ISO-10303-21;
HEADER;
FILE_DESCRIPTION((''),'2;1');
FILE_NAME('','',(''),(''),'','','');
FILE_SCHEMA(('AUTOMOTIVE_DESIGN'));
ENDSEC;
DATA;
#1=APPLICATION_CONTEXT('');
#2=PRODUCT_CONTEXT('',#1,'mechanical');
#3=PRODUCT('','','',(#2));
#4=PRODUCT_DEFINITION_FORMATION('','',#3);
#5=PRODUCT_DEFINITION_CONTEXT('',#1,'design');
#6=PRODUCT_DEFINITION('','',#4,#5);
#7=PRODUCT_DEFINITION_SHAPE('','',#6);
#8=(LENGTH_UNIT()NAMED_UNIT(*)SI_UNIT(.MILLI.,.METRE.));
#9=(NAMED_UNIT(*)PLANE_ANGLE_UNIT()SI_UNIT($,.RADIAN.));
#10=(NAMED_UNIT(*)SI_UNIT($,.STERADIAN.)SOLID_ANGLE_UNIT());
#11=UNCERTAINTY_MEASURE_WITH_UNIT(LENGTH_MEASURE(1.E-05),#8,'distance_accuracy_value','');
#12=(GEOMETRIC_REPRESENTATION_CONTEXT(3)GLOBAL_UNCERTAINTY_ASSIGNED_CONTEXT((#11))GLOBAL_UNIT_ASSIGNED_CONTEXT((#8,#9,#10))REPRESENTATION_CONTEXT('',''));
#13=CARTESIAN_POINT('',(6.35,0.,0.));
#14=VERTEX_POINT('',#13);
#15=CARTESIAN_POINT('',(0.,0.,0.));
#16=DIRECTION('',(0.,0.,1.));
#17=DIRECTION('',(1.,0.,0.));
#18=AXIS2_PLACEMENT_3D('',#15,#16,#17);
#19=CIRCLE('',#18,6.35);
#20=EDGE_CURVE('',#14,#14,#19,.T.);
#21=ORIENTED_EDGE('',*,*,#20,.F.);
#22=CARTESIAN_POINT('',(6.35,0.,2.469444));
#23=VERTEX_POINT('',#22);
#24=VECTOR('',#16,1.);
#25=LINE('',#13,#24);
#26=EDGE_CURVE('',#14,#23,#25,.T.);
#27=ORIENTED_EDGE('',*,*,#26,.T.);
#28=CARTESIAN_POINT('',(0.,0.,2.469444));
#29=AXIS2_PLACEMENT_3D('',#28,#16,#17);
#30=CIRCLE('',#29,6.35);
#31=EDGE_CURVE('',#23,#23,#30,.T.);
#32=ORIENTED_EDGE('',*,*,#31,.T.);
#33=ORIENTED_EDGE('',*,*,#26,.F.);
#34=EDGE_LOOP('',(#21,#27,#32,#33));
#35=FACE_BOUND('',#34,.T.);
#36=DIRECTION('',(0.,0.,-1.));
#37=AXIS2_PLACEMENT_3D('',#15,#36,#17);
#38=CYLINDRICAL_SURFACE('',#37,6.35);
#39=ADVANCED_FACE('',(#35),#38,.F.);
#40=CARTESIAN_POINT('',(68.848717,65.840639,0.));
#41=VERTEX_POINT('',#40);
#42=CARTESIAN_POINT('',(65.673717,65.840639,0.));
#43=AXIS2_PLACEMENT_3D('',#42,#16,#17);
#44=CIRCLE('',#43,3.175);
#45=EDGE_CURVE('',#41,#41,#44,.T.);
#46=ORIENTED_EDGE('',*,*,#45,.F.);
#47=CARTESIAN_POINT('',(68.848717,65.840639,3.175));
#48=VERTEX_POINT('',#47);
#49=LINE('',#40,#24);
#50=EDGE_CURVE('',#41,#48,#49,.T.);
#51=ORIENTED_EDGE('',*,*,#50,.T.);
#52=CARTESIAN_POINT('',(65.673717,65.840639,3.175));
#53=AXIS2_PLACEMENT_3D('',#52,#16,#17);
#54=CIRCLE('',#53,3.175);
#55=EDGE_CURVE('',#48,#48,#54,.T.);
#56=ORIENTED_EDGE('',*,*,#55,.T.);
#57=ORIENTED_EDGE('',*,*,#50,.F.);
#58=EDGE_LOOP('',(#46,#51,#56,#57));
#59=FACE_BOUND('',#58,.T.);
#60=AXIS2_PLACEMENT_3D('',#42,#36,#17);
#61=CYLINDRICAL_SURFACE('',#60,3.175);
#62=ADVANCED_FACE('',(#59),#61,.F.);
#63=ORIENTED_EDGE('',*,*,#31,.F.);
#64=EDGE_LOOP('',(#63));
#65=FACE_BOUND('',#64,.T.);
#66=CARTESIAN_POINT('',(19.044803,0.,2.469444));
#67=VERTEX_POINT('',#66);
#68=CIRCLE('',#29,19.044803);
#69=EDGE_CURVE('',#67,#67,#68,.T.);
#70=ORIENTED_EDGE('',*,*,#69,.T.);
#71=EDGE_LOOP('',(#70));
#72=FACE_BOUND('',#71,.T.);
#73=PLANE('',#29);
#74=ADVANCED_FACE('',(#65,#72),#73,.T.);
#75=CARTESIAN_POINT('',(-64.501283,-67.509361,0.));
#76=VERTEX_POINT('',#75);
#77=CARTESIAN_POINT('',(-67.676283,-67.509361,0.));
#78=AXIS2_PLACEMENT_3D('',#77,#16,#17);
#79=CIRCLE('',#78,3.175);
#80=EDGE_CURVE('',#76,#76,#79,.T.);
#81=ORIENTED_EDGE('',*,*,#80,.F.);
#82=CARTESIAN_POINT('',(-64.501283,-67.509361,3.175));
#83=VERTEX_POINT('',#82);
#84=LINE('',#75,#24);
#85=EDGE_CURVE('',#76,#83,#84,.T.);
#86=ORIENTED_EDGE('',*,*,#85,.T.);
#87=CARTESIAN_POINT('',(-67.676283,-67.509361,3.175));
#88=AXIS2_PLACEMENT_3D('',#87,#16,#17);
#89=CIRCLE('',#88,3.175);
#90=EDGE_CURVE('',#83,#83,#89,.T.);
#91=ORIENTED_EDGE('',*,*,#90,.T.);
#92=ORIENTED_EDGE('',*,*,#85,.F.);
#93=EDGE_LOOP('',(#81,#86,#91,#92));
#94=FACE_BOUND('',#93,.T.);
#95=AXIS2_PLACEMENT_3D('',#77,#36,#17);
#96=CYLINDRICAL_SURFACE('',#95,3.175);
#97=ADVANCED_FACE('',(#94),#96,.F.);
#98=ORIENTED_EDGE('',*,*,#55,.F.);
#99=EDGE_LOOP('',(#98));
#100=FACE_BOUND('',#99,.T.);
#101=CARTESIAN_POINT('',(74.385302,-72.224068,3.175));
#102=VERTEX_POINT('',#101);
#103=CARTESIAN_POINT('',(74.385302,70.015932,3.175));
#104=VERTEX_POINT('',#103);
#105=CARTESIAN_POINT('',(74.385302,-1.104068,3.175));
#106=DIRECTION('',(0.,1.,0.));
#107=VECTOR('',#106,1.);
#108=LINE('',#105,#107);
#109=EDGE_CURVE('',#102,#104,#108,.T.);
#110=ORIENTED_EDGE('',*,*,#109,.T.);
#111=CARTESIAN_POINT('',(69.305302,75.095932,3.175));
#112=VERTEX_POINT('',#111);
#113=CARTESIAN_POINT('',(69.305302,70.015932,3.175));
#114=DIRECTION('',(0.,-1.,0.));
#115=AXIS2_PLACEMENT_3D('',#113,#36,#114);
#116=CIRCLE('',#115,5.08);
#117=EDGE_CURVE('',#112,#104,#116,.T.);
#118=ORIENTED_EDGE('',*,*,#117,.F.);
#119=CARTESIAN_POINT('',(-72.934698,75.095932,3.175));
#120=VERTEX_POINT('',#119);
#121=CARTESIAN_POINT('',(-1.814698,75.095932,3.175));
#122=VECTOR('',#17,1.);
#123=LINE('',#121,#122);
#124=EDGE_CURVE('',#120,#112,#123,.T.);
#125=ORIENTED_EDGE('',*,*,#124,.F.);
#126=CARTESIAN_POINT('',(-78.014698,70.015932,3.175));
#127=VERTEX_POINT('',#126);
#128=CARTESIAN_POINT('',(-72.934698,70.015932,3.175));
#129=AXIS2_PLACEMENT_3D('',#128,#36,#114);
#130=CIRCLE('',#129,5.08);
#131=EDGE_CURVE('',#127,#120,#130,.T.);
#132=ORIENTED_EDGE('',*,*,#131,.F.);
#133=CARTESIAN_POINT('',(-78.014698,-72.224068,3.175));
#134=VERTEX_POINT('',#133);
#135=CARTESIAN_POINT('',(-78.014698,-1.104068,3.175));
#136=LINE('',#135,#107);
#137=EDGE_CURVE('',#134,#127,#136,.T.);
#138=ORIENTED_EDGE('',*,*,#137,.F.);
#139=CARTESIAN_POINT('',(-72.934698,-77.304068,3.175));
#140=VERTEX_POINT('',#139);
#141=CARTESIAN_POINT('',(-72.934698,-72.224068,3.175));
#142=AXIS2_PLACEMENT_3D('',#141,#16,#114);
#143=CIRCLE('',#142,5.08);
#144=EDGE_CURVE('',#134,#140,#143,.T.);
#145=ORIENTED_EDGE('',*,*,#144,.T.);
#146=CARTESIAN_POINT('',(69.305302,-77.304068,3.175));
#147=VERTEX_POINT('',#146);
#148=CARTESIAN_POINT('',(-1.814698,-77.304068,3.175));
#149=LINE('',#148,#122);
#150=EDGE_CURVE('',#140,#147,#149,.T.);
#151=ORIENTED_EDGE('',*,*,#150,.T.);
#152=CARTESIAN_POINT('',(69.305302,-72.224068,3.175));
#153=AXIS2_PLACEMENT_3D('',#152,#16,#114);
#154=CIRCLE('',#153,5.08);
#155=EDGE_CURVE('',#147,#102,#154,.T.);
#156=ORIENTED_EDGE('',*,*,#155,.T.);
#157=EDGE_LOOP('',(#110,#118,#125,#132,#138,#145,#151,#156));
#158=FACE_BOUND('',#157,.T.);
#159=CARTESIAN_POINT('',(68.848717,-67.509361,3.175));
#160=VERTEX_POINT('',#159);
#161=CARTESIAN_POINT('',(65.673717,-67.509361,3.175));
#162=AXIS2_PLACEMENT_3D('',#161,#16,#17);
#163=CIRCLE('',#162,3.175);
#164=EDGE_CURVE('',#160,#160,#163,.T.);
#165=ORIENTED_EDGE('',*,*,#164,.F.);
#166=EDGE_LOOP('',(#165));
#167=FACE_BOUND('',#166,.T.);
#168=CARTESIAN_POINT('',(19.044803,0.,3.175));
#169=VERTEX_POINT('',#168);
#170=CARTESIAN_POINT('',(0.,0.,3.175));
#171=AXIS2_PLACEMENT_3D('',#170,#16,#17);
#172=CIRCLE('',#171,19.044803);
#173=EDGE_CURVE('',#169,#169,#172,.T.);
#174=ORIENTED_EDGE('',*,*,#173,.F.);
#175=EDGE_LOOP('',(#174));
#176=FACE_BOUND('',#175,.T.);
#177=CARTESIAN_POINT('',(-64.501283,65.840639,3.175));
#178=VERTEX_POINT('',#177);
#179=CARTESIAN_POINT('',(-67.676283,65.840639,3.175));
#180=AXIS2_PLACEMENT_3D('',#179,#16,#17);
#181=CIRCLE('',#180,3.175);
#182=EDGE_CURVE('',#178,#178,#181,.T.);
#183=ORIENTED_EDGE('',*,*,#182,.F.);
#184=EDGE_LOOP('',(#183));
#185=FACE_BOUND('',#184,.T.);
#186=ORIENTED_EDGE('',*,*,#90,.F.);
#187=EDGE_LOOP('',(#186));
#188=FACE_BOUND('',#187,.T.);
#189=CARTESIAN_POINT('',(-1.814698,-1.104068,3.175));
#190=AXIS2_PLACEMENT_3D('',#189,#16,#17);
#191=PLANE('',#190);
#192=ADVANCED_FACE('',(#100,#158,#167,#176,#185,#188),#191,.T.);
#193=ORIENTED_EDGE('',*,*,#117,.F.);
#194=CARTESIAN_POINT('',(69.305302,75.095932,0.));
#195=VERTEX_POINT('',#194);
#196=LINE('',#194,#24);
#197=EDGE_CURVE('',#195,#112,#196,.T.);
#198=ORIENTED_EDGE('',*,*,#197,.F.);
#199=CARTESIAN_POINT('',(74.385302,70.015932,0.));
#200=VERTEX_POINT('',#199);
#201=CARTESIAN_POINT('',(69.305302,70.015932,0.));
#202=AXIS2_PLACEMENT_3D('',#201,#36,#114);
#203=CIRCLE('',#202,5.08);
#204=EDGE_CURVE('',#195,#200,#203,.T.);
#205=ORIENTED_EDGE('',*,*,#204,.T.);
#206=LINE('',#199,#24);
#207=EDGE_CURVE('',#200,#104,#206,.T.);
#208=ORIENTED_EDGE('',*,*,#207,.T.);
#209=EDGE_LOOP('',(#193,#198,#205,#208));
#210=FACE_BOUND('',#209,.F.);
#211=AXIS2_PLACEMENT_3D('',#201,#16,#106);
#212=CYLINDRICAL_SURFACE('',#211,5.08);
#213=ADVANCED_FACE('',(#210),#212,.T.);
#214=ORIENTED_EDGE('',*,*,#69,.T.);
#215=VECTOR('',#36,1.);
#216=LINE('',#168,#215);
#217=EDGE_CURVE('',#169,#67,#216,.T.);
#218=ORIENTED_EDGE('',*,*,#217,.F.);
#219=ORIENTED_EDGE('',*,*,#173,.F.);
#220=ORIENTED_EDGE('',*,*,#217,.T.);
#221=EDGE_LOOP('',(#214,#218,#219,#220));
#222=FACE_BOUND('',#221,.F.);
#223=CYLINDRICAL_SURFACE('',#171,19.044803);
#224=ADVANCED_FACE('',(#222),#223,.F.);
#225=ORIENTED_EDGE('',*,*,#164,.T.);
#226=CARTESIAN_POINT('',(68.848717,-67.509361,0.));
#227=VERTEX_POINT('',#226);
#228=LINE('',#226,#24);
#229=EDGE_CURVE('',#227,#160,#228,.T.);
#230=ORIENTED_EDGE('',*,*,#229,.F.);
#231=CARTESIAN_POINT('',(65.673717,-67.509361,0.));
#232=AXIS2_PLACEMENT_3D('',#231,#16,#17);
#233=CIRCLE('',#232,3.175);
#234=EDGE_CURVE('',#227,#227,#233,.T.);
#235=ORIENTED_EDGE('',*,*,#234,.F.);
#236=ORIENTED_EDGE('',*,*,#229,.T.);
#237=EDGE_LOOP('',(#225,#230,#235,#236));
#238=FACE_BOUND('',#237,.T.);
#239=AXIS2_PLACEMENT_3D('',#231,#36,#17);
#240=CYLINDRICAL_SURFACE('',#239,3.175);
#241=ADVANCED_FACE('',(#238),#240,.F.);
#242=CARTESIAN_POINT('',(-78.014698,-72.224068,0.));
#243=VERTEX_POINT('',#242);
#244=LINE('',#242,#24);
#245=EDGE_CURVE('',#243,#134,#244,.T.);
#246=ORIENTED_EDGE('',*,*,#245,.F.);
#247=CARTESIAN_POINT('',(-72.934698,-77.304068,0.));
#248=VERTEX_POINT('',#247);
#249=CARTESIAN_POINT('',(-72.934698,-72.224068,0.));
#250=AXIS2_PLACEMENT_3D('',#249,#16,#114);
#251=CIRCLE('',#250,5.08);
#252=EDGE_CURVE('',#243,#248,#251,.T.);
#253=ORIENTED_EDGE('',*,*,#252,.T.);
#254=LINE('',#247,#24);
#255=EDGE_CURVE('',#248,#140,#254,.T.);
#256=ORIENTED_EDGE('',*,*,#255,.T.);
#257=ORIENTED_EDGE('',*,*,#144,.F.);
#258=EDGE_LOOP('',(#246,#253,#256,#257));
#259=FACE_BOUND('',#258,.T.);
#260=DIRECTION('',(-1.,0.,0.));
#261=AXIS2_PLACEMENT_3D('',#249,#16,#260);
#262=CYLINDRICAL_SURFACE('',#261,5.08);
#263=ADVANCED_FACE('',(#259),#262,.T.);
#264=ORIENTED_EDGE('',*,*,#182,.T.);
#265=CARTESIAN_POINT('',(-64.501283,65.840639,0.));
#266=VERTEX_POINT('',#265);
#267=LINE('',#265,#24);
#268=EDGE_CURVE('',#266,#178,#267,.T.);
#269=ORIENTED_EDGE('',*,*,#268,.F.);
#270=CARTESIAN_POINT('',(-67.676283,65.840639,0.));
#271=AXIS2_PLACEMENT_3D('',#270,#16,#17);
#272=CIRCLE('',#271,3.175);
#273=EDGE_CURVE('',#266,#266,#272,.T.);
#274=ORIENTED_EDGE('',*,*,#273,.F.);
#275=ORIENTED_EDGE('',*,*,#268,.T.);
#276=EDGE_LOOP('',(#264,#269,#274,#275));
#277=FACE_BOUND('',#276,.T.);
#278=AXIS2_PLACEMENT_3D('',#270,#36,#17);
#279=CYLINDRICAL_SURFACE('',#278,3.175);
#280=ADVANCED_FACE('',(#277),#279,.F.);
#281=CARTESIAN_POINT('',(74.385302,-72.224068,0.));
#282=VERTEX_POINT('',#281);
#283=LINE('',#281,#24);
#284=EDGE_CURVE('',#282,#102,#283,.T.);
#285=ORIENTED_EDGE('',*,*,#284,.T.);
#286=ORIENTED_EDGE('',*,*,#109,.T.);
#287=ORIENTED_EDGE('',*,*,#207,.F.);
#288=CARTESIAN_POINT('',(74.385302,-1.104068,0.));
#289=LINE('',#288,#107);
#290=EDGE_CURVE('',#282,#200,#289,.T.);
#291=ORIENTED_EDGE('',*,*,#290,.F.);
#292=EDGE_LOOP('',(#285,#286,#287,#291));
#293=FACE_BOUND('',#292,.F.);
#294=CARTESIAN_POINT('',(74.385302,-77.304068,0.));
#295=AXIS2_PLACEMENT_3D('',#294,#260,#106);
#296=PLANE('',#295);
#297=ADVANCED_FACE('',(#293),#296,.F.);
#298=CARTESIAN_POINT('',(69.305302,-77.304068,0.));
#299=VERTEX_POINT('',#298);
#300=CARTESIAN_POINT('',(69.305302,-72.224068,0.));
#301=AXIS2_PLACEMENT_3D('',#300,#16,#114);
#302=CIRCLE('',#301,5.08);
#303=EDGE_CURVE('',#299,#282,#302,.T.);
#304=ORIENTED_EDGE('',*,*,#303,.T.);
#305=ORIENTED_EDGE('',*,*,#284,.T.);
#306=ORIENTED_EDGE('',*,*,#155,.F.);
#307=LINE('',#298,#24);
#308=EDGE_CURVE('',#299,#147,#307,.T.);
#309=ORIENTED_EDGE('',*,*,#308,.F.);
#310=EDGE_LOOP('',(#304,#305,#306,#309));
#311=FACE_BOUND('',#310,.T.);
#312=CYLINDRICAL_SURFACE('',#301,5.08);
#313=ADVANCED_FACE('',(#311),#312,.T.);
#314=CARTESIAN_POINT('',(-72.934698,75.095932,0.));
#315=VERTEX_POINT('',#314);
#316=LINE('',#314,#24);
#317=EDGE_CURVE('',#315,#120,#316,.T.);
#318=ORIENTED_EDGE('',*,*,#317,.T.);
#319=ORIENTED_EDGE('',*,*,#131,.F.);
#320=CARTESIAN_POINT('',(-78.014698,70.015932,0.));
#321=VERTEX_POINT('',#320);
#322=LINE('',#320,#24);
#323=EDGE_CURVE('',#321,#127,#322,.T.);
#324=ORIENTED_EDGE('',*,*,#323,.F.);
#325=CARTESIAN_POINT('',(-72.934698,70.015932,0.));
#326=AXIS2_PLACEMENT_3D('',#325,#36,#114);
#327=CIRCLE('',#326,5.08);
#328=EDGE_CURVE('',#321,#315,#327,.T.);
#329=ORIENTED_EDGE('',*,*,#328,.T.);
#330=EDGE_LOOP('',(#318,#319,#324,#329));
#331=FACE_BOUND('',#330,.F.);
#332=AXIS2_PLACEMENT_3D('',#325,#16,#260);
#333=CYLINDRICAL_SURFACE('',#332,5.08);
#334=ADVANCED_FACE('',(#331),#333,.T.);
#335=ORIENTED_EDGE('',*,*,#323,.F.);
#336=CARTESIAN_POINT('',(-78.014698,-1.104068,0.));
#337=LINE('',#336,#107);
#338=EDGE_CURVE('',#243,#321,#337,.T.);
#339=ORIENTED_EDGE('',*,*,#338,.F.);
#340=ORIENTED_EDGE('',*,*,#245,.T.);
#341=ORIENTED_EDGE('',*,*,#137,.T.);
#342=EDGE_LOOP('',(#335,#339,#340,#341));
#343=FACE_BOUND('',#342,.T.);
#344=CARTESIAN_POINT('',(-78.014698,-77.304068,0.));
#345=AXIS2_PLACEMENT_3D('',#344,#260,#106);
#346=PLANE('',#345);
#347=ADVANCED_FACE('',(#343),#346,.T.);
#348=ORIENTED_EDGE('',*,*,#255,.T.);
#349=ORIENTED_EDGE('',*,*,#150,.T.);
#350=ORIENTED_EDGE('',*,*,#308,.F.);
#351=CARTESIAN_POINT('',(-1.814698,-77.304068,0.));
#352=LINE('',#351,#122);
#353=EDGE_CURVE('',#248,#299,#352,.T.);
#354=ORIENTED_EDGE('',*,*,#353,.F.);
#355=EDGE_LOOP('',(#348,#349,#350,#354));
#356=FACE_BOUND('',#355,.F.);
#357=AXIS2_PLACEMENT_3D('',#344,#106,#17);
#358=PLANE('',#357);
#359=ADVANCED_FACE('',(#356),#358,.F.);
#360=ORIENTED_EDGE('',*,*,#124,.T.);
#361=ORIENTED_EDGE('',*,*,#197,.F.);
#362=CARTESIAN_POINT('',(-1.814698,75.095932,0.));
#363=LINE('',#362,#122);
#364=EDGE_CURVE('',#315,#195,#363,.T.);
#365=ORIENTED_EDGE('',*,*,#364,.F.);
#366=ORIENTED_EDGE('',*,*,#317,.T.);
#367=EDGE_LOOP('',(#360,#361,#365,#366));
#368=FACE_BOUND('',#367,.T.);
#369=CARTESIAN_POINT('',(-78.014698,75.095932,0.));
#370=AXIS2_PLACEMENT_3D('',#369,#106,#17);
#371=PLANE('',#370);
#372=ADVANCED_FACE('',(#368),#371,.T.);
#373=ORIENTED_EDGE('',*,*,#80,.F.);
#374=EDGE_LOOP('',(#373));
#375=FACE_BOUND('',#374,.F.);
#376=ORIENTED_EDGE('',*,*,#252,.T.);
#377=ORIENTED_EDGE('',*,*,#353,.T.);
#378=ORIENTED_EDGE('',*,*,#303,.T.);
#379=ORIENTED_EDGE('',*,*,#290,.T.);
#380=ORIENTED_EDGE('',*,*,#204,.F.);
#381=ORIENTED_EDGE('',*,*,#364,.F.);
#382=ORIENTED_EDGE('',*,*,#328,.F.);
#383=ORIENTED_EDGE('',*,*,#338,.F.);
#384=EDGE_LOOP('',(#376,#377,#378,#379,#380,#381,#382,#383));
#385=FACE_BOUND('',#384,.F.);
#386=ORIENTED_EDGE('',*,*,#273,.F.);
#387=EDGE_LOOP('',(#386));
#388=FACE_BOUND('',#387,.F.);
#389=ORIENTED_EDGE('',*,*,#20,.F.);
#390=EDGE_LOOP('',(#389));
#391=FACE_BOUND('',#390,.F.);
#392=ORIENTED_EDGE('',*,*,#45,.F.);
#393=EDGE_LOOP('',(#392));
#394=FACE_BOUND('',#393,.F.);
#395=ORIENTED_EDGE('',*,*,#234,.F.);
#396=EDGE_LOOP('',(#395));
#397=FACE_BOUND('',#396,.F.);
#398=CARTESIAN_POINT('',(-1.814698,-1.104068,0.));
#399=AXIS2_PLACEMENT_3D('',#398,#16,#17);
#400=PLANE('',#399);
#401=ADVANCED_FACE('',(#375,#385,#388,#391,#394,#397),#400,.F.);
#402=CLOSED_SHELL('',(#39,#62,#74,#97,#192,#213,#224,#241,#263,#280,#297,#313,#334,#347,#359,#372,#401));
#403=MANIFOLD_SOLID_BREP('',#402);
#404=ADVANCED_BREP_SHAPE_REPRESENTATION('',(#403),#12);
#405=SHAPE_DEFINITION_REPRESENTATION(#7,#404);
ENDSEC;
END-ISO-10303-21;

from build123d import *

# Parameters (mm, degrees)
F0_W     = 152.4
F0_H     = 152.4
F0_R     = 3.175
F0_R_2   = 6.35
F1_DEPTH = 3.175
F2_R     = 5.08
F3_R     = 19.044803008
F3_R_2   = 6.35
F4_DEPTH = 0.7055555556


# Not quite as in the source:
# - a length typed as a fraction of an inch, garbled in the dataset ("3 / 203.2 mm" for 3/8 in), is restored


with BuildPart() as f1:
    # F0 (on Top) → F1 (new body)
    with BuildSketch(Plane.XY):
        with Locations((-1.8146978691, -1.1040684107)):
            Rectangle(F0_W, F0_H)
        with Locations((-67.6762834191, -67.5093614922)):
            Circle(F0_R, mode=Mode.SUBTRACT)
        with Locations((65.6737165809, -67.5093614922)):
            Circle(F0_R, mode=Mode.SUBTRACT)
        with Locations((-67.6762834191, 65.8406385078)):
            Circle(F0_R, mode=Mode.SUBTRACT)
        Circle(F0_R_2, mode=Mode.SUBTRACT)
        with Locations((65.6737165809, 65.8406385078)):
            Circle(F0_R, mode=Mode.SUBTRACT)
    extrude(amount=F1_DEPTH)

    # F2
    f2_edges = [f1.edges().sort_by_distance(p)[0] for p in [
        (74.385302, 75.095932, 1.5875),
        (-78.014698, 75.095932, 1.5875),
        (74.385302, -77.304068, 1.5875),
        (-78.014698, -77.304068, 1.5875),
    ]]
    fillet(f2_edges, radius=F2_R)

    # F3 (on face) → F4 (cut)
    with BuildSketch(Plane.XY.offset(3.175)):
        Circle(F3_R)
        Circle(F3_R_2, mode=Mode.SUBTRACT)
    extrude(amount=-F4_DEPTH, mode=Mode.SUBTRACT)


solid = f1.part
